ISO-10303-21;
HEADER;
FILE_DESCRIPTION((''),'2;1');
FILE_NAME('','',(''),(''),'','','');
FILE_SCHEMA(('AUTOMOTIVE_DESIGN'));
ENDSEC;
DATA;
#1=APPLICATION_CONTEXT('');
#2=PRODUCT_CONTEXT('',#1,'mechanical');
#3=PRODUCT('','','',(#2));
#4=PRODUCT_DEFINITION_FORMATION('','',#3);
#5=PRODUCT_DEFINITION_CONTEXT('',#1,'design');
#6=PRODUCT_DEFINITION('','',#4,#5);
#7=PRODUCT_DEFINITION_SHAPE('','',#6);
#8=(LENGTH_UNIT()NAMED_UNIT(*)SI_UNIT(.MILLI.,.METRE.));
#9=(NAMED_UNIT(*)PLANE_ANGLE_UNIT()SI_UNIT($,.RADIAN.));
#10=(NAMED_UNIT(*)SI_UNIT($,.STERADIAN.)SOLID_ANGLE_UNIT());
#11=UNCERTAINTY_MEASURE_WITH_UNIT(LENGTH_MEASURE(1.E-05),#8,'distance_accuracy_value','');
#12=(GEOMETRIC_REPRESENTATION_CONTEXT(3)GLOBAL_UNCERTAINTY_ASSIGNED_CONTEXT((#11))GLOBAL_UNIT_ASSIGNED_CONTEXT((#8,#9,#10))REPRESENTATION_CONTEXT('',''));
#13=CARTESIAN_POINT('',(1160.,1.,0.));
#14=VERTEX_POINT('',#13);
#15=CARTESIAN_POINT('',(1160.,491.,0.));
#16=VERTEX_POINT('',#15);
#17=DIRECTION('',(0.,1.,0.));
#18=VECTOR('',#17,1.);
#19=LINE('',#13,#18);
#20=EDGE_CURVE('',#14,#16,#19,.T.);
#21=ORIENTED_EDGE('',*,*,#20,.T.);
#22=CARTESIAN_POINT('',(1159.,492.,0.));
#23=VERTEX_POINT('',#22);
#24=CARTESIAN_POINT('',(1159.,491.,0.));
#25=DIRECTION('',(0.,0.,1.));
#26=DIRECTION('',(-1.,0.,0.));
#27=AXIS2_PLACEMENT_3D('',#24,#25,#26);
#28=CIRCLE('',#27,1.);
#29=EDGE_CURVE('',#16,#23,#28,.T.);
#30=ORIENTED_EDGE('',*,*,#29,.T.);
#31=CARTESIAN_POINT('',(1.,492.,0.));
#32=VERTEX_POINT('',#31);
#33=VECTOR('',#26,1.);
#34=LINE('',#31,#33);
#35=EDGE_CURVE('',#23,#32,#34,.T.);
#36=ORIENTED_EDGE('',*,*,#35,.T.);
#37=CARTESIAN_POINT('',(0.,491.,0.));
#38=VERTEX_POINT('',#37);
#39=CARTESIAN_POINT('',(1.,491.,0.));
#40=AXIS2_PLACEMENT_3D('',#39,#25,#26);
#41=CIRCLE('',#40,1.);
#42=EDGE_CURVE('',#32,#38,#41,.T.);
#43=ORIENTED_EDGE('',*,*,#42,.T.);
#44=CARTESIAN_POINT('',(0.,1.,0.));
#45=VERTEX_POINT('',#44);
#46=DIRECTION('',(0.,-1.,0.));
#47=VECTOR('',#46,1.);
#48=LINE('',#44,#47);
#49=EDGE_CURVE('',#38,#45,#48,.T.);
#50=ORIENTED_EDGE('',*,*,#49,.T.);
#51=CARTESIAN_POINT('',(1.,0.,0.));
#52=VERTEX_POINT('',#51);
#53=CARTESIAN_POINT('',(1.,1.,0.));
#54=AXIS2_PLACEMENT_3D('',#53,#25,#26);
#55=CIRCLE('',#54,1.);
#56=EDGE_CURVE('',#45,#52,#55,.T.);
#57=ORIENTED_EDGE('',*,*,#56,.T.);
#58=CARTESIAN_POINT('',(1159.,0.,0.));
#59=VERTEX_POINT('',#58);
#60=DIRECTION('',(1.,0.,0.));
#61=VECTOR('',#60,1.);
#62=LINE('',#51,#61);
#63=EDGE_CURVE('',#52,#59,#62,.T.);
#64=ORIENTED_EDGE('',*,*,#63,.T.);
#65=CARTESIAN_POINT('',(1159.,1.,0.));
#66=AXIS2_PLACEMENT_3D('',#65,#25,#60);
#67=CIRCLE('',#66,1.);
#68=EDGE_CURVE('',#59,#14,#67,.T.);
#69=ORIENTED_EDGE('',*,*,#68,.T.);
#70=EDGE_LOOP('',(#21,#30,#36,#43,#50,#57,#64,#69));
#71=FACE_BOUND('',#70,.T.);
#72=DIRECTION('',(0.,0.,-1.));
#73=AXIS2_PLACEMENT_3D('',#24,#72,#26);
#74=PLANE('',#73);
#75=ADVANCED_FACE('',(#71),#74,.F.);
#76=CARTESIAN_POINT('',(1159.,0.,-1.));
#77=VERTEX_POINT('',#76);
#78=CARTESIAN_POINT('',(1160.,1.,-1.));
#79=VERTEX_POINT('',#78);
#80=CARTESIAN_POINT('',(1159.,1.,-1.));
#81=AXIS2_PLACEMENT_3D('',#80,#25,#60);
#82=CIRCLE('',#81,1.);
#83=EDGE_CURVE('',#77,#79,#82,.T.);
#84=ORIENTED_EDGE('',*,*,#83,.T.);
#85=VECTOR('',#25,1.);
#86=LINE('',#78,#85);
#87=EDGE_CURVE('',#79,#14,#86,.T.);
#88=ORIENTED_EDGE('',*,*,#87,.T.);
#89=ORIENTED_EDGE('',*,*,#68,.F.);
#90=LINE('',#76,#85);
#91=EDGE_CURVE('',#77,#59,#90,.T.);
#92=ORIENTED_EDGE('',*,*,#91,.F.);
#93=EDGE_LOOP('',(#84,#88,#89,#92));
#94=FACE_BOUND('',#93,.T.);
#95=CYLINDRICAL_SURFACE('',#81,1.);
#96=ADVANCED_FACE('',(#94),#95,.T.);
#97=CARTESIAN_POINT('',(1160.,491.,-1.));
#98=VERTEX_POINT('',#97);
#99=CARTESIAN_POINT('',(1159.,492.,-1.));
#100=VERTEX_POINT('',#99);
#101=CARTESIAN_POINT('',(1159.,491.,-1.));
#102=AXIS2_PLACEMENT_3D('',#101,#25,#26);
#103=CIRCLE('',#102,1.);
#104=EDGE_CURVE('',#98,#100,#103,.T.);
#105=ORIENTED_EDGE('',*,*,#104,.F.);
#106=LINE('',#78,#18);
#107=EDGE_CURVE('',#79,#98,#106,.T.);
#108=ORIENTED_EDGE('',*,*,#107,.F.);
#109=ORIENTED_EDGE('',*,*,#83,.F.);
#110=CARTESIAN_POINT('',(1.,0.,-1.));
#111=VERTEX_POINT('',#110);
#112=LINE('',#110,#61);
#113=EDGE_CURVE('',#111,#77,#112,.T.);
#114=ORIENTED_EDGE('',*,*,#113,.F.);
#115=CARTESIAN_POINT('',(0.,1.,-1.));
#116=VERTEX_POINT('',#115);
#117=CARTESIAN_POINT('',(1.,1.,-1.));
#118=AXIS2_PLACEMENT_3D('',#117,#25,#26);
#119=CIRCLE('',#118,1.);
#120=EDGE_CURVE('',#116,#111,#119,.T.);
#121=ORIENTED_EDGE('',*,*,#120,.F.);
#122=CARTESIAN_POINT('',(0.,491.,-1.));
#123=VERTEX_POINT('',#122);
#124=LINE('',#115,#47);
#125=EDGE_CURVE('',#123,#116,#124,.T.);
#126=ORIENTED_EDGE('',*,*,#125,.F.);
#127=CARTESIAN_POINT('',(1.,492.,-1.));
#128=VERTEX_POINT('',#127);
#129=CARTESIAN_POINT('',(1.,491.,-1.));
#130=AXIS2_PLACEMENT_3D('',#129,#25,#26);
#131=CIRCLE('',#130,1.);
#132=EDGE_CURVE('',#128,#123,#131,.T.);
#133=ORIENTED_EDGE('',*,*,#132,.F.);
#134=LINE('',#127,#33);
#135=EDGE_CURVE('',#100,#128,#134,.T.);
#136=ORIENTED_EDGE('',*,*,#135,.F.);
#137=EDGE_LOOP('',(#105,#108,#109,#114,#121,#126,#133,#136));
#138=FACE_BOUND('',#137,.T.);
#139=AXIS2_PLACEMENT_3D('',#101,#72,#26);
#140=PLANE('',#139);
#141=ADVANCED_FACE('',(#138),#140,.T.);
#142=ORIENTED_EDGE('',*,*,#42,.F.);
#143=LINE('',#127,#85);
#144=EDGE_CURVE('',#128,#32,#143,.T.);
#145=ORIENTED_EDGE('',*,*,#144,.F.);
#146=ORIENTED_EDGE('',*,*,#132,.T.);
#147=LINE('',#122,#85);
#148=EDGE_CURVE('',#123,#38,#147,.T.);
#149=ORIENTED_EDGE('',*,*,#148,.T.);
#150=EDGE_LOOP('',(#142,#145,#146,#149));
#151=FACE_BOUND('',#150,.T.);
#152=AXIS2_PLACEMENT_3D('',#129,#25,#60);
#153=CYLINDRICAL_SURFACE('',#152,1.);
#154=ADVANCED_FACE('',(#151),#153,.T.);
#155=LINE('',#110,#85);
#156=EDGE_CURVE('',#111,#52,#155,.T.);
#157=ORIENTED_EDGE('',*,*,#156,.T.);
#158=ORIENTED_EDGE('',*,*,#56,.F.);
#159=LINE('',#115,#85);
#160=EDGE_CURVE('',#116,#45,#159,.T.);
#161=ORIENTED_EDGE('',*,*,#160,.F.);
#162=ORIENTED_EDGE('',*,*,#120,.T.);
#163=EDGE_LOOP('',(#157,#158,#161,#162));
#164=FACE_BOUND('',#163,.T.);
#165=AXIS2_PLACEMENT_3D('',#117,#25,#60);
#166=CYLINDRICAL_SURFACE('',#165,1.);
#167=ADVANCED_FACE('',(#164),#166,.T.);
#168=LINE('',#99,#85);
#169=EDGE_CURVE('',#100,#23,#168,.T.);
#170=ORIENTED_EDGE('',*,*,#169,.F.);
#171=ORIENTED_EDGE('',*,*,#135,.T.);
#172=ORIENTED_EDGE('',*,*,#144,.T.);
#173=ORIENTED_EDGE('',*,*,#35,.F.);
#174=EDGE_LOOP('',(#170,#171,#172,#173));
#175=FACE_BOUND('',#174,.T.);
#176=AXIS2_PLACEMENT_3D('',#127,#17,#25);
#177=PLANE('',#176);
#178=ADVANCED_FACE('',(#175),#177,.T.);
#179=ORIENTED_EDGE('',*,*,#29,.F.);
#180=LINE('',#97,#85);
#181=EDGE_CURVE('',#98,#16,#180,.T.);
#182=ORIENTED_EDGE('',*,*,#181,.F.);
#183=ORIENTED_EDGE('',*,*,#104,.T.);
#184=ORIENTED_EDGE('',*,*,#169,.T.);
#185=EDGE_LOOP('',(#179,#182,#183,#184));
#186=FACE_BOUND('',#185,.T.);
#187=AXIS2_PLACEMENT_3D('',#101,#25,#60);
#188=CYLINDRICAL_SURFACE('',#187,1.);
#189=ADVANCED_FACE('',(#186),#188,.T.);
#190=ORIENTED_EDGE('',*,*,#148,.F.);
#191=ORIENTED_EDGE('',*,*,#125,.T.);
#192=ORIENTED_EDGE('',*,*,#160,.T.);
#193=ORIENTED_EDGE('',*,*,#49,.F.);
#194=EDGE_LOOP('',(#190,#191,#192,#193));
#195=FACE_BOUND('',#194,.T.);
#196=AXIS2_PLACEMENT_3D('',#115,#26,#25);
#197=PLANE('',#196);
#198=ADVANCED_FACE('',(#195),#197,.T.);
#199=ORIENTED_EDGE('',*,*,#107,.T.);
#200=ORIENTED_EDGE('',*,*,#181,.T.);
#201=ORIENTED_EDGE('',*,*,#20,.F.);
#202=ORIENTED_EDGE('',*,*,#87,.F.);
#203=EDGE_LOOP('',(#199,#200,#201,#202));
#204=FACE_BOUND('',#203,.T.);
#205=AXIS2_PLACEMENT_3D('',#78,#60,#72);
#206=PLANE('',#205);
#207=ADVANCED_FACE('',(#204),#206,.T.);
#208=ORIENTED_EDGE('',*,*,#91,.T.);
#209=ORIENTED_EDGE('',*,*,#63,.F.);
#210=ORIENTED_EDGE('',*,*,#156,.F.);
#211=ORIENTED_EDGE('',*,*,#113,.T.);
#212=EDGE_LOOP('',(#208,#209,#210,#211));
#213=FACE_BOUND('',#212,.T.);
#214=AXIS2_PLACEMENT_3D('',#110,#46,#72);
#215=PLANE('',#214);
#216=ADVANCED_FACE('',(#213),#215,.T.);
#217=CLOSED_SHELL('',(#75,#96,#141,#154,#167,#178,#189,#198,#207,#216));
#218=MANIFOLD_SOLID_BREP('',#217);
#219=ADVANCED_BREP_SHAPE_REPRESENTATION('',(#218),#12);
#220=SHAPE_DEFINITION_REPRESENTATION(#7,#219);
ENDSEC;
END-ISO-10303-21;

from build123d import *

# Parameters (mm, degrees)
BASE_FLANGE1_DEPTH = 1


# Sheet-metal steps are written as plain solids
with BuildPart() as part:
    # Sketch1 → Base-Flange1 (new body)
    with BuildSketch(Plane.XY):
        with BuildLine():
            Line((1, 0), (1159, 0))
            ThreePointArc((1159, 0), (1159.707106781, 0.292893219), (1160, 1))
            Line((1160, 1), (1160, 491))
            ThreePointArc((1160, 491), (1159.707106781, 491.707106781), (1159, 492))
            Line((1159, 492), (1, 492))
            ThreePointArc((1, 492), (0.292893219, 491.707106781), (0, 491))
            Line((0, 491), (0, 1))
            ThreePointArc((0, 1), (0.292893219, 0.292893219), (1, 0))
        make_face()
    extrude(amount=-BASE_FLANGE1_DEPTH)


solid = part.part
